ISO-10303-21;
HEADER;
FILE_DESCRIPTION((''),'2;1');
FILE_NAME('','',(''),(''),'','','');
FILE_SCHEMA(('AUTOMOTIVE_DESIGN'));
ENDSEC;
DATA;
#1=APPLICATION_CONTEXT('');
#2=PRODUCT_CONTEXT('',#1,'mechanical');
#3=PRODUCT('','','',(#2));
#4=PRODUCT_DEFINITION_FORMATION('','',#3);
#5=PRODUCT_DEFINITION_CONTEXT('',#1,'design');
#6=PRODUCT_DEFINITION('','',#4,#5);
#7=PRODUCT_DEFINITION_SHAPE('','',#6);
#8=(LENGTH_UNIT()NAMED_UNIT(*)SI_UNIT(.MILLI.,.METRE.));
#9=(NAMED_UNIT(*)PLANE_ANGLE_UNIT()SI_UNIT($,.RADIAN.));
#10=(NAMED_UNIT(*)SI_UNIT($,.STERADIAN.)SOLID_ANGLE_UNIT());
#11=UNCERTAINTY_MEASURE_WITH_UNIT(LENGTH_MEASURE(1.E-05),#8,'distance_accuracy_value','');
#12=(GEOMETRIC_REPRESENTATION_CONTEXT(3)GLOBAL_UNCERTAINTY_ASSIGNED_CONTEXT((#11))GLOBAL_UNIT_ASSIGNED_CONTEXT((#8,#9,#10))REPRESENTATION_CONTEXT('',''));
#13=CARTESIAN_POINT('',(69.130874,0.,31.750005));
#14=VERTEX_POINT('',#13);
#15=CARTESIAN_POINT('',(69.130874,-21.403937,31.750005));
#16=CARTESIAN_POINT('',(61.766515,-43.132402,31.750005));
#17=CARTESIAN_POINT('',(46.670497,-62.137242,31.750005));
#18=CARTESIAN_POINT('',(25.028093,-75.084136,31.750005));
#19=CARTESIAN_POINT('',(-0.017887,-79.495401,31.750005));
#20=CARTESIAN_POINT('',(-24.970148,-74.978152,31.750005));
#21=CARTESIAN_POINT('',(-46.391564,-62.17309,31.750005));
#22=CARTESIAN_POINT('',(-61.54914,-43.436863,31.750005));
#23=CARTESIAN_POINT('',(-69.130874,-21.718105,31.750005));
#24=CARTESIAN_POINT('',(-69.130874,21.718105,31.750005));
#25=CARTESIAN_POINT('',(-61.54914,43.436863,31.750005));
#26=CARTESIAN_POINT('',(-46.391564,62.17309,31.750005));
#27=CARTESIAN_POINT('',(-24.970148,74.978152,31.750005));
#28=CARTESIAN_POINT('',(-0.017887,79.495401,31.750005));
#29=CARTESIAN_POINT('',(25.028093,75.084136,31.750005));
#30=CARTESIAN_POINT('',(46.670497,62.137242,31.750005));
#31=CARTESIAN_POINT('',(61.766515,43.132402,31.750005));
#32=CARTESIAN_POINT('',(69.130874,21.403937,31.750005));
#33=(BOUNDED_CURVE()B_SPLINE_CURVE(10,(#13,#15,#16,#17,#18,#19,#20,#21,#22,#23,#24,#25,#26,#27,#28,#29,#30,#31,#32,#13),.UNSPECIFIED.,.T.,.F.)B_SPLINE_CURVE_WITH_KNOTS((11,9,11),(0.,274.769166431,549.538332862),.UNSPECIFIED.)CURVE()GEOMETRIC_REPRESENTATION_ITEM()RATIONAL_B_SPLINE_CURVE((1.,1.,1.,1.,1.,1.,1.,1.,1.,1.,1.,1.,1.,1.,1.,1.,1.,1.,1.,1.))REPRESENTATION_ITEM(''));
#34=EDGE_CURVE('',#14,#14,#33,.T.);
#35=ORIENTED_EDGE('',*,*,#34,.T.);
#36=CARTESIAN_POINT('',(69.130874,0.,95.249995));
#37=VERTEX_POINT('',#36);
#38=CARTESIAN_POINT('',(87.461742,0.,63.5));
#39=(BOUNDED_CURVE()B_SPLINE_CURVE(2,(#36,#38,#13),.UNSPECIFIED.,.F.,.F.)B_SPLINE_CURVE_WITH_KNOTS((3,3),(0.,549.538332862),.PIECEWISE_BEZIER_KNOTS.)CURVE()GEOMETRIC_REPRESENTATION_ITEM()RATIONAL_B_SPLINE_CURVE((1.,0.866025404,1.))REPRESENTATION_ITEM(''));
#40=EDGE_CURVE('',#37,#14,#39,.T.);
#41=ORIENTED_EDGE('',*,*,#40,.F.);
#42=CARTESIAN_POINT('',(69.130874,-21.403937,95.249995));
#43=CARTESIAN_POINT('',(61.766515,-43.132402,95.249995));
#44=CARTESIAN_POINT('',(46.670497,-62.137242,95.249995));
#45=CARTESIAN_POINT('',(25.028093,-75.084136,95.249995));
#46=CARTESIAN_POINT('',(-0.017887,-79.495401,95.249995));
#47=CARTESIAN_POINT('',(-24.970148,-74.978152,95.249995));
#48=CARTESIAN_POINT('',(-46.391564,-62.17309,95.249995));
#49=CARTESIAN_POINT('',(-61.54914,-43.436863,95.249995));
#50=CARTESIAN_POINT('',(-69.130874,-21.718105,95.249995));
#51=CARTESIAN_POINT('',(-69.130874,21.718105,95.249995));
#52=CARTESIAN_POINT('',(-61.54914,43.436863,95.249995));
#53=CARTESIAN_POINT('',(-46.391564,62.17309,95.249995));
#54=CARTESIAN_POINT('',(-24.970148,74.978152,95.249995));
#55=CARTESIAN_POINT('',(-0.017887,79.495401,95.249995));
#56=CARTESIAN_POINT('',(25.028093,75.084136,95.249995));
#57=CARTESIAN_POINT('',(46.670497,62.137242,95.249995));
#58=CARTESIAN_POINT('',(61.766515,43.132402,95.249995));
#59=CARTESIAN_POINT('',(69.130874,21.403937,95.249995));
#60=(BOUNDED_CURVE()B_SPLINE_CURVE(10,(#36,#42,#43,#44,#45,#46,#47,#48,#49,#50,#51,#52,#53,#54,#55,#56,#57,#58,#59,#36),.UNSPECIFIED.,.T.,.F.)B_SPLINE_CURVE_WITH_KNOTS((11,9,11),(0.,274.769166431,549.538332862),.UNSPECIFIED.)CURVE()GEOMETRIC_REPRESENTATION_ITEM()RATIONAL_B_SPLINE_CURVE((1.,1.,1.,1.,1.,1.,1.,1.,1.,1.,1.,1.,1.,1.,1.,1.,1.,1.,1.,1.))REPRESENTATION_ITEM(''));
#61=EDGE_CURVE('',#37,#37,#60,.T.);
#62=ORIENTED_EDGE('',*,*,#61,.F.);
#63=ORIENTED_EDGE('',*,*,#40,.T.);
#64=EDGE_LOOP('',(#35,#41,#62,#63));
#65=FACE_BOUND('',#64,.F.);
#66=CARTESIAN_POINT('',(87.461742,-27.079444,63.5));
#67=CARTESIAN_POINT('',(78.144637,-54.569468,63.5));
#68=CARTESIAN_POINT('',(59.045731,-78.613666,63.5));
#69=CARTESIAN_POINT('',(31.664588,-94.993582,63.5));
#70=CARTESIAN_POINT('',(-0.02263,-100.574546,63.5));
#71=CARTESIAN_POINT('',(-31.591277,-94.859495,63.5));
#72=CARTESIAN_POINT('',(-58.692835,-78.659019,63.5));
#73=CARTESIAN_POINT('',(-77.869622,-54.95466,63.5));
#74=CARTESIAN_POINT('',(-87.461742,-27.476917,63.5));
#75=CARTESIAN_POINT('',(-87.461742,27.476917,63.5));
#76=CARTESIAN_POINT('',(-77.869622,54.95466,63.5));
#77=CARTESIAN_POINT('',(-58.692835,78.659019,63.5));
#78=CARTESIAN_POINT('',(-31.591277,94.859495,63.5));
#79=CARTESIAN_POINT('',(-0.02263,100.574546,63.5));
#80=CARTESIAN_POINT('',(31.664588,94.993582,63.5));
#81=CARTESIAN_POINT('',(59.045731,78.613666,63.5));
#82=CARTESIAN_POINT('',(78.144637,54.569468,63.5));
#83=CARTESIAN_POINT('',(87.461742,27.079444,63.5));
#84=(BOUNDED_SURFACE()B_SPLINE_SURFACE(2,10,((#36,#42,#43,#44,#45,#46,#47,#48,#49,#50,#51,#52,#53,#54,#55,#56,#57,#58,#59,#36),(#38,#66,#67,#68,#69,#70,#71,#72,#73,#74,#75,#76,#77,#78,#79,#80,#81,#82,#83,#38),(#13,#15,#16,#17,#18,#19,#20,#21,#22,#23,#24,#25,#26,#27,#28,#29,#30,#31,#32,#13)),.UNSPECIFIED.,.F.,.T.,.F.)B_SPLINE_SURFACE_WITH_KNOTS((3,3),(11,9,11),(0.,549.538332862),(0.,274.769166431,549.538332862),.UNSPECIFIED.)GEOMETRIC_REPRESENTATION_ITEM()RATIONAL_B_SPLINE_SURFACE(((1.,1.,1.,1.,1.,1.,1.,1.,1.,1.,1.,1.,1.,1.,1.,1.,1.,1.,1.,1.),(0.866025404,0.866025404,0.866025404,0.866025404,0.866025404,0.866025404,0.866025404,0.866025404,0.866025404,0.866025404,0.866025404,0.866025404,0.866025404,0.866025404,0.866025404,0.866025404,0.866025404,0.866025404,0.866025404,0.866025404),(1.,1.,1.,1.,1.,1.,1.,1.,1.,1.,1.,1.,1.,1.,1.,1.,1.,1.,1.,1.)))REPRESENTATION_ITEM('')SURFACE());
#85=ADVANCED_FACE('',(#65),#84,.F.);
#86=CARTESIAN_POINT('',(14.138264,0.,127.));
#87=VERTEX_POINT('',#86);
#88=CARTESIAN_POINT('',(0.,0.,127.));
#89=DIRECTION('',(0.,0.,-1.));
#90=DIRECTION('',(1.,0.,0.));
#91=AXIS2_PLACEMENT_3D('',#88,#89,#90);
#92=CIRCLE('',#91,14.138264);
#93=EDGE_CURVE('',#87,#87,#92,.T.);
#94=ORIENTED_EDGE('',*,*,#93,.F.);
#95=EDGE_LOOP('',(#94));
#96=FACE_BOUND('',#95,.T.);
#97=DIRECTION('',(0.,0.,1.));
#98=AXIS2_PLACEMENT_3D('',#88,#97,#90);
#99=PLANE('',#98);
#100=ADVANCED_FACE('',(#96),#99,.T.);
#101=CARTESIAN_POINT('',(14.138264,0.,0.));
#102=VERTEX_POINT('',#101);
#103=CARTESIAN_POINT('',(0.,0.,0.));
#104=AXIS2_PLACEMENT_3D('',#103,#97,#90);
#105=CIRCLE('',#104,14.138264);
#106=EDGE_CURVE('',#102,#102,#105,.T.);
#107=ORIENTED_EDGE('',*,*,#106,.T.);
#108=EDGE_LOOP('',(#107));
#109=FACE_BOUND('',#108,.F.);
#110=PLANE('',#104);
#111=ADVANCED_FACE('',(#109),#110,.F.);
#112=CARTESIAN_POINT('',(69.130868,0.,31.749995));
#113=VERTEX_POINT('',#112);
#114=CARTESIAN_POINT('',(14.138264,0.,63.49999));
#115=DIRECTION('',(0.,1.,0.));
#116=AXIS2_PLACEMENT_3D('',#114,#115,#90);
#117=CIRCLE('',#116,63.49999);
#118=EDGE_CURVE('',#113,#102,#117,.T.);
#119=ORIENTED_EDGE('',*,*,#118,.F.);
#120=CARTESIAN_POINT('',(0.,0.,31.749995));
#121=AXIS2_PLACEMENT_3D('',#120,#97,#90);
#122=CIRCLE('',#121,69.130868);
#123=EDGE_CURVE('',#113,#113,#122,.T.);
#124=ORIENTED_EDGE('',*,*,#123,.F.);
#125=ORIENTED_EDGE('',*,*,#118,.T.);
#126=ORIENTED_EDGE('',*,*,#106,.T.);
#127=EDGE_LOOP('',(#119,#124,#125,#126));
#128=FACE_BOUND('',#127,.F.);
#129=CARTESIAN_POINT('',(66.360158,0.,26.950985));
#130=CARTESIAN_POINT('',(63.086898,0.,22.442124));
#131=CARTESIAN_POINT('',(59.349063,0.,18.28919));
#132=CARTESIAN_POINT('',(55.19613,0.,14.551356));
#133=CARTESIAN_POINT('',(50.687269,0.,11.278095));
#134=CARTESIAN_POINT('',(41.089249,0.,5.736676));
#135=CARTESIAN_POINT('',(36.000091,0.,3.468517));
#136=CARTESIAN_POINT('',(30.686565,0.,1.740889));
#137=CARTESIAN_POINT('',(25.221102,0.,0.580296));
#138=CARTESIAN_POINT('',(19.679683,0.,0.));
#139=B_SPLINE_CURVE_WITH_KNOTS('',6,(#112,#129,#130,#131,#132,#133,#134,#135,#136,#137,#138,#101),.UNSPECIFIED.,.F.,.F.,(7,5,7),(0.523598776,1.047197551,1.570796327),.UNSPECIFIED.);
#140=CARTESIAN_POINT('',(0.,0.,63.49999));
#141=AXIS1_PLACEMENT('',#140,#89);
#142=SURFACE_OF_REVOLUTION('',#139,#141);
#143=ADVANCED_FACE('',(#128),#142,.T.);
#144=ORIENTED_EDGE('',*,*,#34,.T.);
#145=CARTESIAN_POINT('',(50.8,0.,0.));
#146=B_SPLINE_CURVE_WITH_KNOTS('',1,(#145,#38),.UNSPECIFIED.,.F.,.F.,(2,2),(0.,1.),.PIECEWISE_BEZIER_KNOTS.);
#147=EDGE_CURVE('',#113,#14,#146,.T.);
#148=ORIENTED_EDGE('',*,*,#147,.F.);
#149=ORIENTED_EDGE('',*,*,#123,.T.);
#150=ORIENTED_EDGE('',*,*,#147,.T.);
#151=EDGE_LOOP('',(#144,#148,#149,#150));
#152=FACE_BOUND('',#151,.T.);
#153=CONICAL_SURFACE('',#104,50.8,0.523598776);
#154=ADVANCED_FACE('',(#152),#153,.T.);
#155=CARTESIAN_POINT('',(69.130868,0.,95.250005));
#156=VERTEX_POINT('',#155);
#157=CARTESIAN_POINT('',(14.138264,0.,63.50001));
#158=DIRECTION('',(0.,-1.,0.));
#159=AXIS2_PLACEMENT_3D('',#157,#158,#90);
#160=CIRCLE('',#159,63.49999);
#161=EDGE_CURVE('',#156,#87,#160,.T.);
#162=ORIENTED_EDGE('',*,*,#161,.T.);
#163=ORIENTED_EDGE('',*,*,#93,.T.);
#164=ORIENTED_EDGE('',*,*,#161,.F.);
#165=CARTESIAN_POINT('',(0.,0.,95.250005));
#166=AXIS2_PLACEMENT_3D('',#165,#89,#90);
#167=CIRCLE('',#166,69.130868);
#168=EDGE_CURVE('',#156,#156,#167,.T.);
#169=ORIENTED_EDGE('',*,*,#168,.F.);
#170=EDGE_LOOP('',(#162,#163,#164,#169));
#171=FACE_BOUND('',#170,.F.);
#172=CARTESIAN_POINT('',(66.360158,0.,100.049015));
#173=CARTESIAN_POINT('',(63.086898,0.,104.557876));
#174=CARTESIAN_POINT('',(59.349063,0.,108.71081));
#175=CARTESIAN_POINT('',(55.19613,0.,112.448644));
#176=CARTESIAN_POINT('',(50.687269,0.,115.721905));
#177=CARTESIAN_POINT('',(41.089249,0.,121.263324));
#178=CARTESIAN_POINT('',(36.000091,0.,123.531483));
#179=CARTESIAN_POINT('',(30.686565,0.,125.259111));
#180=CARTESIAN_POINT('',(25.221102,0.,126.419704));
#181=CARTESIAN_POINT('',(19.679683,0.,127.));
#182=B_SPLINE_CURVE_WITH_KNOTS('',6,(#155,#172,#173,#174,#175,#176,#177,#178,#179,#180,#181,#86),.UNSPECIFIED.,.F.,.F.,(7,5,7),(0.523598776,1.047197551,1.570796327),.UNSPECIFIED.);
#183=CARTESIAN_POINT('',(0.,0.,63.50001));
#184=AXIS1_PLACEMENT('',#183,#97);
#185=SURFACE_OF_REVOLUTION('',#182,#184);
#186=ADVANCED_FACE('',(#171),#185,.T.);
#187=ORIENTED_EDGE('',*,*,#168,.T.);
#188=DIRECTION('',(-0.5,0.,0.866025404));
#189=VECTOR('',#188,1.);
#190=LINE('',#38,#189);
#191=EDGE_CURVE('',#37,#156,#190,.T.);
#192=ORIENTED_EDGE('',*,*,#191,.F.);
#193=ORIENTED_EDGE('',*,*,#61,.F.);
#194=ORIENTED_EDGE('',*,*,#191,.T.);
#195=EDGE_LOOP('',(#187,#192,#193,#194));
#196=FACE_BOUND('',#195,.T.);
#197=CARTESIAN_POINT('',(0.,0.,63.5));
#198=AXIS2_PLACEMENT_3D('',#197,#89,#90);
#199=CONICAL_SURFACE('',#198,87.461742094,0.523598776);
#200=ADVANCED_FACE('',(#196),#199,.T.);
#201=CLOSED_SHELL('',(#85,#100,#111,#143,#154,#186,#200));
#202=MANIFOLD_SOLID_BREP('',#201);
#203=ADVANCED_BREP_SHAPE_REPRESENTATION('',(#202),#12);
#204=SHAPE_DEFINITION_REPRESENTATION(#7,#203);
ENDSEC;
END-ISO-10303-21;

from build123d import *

# Parameters (mm, degrees)
F0_R      = 50.8
F1_DEPTH  = 63.5
F1_TAPER  = -30
F1_FACE_R = 87.4617420935
F2_DEPTH  = 63.5
F2_TAPER  = 30
F3_R      = 63.49999


# Not quite as in the source:
# - a fillet or chamfer is up to 0.001 mm smaller than in the source, because OpenCascade refuses the exact size


with BuildPart() as f1:
    # F0 (on Top) → F1 (new body)
    with BuildSketch(Plane.XY):
        Circle(F0_R)
    extrude(amount=F1_DEPTH, taper=F1_TAPER)

    # F1_face (on face) → F2 (join)
    with BuildSketch(Plane.XY.offset(63.5)):
        Circle(F1_FACE_R)
    extrude(amount=F2_DEPTH, taper=F2_TAPER)

    # F3 (radius 63.5 in the source; OpenCascade refuses exactly that, so slightly less here)
    f3_edges = [f1.edges().sort_by_distance(p)[0] for p in [
        (-87.461742, 0, 63.5),
        (-50.8, 0, 127),
        (-50.8, 0, 0),
    ]]
    fillet(f3_edges, radius=F3_R)


solid = f1.part
